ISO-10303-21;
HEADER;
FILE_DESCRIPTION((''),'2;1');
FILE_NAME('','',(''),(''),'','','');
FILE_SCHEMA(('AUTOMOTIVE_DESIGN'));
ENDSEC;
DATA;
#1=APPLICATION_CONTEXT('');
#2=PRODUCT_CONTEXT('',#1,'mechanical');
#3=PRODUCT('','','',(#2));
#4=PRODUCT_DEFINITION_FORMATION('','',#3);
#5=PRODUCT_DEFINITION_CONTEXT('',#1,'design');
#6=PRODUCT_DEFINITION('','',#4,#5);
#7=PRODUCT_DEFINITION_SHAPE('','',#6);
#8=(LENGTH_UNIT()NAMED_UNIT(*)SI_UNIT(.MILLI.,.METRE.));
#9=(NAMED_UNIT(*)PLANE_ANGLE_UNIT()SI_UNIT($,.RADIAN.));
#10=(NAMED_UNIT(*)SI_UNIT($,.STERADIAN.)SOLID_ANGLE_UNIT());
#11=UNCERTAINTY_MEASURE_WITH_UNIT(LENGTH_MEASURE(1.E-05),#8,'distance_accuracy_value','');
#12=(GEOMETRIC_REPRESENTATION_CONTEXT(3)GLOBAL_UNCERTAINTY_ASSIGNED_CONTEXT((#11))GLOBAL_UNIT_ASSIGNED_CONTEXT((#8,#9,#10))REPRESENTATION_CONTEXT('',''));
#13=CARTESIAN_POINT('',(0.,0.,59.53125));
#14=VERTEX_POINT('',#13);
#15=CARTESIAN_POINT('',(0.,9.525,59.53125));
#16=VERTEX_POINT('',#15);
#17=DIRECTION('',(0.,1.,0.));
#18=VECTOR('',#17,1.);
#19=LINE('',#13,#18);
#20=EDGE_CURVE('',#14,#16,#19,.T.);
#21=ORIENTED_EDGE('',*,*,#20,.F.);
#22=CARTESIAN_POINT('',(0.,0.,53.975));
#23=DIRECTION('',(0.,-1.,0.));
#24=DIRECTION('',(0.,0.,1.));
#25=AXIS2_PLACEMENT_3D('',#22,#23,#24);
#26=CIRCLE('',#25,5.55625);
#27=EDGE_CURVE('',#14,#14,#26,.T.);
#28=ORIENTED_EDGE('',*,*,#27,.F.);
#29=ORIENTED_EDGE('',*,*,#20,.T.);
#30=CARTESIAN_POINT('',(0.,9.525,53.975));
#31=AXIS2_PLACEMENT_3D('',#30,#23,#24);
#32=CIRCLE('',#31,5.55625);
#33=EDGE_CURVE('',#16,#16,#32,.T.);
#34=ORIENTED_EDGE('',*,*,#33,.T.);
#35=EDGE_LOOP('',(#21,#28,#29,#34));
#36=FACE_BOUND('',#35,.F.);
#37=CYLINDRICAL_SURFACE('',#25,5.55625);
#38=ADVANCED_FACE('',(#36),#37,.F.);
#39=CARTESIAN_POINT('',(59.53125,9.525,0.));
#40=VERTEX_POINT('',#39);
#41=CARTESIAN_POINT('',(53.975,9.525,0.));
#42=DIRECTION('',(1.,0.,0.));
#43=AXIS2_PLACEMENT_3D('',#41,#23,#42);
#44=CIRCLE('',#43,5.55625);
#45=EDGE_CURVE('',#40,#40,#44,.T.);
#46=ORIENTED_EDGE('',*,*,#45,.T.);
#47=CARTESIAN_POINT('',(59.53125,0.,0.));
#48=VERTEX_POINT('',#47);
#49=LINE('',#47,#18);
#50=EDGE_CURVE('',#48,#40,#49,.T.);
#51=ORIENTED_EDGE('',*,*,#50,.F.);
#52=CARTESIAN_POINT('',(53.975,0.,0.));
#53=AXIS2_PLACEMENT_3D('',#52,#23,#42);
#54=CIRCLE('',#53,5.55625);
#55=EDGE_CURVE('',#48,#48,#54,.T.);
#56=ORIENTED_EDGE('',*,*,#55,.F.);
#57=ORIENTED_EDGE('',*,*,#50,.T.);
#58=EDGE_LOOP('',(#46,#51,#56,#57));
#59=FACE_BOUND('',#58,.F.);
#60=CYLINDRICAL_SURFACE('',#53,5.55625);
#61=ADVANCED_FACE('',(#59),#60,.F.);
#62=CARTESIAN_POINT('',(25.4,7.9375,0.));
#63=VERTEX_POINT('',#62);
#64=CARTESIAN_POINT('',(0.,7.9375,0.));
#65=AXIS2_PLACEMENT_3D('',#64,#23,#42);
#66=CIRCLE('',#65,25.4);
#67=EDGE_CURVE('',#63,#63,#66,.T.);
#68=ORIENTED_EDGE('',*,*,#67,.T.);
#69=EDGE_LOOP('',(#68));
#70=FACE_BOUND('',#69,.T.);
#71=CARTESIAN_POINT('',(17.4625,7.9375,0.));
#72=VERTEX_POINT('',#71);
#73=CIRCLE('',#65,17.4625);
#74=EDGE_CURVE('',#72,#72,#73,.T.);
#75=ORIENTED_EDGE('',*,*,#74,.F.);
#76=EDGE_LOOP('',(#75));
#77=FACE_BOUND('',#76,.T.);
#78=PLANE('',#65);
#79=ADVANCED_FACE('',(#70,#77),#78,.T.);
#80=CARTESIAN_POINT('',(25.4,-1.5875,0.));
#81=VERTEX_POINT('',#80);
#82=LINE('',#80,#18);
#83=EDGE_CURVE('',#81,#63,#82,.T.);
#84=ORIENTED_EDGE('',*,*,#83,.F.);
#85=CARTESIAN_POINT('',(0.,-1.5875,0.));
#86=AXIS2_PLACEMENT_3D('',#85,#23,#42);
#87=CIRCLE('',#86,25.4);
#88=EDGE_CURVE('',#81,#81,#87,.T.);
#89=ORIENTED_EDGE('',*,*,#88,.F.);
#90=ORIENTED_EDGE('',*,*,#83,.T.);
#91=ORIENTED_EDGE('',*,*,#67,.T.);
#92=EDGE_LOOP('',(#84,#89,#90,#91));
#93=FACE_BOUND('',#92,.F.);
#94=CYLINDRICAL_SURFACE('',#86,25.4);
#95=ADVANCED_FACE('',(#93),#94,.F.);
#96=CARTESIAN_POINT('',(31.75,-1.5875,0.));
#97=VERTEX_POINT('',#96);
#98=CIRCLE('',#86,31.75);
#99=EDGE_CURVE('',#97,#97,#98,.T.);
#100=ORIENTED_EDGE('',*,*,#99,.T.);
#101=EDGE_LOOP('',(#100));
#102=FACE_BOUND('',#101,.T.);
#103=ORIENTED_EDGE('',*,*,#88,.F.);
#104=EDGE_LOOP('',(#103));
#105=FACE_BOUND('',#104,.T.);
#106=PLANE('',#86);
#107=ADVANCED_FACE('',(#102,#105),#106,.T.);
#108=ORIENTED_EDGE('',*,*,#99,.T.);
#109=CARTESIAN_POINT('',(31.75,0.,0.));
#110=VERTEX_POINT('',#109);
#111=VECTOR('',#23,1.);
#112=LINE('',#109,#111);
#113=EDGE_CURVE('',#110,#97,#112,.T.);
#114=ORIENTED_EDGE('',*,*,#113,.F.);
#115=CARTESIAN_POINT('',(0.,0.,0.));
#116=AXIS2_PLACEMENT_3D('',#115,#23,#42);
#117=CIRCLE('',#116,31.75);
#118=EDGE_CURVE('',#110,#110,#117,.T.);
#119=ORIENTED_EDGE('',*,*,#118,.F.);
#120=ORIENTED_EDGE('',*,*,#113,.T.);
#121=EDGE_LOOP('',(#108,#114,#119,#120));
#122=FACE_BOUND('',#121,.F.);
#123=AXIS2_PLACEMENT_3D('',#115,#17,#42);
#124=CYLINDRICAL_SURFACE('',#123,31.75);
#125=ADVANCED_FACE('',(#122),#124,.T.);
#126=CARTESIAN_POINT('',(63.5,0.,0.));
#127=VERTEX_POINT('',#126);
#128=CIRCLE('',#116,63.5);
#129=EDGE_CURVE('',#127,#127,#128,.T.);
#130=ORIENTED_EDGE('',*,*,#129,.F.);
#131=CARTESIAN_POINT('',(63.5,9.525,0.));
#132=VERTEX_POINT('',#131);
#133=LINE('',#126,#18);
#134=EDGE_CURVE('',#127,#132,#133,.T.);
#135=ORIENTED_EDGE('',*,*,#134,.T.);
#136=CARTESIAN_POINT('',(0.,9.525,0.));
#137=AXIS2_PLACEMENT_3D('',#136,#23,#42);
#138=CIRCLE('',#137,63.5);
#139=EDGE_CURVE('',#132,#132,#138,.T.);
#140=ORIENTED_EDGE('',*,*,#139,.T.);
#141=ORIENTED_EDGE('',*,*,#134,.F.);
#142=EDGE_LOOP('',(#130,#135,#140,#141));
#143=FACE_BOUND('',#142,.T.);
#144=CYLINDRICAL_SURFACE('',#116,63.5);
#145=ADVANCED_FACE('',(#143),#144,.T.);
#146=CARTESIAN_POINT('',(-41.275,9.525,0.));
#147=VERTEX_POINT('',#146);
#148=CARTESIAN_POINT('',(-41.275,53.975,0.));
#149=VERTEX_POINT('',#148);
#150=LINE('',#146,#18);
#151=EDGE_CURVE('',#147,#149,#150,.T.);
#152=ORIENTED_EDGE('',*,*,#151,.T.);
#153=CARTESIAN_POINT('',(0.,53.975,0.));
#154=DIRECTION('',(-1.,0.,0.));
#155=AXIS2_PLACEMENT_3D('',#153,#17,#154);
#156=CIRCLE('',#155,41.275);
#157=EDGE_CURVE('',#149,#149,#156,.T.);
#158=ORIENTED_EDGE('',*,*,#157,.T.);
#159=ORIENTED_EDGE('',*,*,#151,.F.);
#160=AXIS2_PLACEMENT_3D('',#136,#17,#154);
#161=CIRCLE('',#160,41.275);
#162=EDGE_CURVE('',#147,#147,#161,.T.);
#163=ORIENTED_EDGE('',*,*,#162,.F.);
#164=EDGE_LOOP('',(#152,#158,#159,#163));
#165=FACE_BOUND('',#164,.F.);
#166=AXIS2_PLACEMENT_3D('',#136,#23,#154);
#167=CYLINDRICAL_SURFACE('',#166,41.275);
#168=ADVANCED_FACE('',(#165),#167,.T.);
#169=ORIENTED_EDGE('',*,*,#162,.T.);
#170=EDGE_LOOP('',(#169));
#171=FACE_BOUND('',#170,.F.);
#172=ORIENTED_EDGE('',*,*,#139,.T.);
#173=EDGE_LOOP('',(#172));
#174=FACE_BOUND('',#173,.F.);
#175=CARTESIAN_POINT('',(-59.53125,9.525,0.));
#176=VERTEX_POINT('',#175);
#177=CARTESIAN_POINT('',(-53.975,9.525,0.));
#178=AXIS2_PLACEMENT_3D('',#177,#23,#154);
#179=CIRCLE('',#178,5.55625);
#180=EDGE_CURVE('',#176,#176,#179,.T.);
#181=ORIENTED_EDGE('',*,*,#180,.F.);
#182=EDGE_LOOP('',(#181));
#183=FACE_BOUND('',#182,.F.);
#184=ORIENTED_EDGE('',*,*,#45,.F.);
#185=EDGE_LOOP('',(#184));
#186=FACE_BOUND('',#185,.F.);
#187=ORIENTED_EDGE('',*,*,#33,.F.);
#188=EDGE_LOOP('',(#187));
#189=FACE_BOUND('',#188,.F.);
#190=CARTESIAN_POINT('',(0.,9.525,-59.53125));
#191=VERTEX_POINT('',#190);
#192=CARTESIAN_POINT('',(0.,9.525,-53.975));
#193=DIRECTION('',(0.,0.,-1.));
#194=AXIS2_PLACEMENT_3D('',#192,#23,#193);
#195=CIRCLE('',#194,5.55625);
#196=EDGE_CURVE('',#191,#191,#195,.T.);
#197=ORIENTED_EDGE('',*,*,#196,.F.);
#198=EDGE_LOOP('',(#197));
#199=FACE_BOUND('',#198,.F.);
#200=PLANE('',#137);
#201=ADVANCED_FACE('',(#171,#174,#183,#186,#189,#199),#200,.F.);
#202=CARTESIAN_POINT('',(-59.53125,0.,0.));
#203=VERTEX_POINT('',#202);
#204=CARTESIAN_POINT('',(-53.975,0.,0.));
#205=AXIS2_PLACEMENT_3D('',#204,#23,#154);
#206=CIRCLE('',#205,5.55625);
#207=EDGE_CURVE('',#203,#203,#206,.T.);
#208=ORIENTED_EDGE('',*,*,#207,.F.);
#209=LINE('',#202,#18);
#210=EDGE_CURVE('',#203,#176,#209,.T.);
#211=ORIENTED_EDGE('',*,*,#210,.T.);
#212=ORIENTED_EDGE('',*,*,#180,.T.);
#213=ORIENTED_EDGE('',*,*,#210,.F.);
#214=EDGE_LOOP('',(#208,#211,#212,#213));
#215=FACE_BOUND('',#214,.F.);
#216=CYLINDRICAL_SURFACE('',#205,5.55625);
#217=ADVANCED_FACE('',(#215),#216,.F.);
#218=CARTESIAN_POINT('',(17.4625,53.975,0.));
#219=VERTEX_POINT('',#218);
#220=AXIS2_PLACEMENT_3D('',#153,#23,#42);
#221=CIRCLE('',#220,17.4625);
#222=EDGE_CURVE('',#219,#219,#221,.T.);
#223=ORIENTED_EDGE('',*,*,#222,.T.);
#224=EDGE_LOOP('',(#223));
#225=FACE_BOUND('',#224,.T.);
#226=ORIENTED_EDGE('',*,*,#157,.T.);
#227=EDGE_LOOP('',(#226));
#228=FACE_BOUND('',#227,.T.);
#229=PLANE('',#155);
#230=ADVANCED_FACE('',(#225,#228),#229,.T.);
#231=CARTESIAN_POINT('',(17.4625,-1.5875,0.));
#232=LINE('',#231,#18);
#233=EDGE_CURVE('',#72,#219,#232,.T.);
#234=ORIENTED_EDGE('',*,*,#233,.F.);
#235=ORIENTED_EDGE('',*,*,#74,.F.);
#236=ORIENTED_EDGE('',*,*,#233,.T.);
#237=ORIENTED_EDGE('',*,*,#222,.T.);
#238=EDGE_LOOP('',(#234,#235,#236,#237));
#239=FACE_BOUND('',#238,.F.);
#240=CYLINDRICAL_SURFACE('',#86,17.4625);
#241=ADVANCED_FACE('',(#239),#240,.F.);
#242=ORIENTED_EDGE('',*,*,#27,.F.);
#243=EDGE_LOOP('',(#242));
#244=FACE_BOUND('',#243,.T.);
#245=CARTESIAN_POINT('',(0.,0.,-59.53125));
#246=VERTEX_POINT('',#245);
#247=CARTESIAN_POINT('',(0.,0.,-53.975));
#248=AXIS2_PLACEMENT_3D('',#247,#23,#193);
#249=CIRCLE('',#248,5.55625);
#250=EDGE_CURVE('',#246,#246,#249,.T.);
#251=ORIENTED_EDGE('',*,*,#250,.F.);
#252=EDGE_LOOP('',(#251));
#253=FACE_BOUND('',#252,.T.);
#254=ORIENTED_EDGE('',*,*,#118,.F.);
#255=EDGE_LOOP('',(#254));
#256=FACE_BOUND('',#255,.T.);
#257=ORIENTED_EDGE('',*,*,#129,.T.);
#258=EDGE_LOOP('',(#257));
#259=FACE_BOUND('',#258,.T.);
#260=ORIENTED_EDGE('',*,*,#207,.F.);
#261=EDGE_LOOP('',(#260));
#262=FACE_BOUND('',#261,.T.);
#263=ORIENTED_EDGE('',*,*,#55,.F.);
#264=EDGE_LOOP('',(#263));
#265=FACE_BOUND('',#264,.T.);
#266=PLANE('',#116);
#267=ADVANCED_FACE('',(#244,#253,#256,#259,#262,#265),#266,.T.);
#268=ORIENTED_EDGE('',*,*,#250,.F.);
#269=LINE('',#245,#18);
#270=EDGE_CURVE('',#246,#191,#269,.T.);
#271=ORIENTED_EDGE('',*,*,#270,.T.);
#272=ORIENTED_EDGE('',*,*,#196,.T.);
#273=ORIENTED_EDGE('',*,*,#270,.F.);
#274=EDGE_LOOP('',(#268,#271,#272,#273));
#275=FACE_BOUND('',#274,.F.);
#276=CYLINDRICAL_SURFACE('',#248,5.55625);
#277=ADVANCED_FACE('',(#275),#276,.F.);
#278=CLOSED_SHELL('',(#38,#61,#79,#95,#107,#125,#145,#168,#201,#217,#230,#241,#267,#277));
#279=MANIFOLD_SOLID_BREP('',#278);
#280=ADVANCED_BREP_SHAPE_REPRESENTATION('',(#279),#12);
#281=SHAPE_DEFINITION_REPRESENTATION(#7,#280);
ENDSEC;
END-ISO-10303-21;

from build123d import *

# Parameters (mm, degrees)
F0_R             = 63.5
F1_DEPTH         = 9.525
F2_R             = 31.75
F3_DEPTH         = 1.5875
F4_R             = 25.4
F5_DEPTH         = 9.525
F6_R             = 41.275
F7_DEPTH         = 44.45
F8_R             = 17.4625
F9_DEPTH         = 55.5635
F10_R            = 5.55625
F11_DEPTH        = 53.976
F11_COPIES_COUNT = 4


# Not quite as in the source:
# - a pattern or mirror of a feature is missing from the dataset's text; its kind, count and spacing are read off the source's solid


with BuildPart() as f1:
    # F0 (on Front) → F1 (new body)
    with BuildSketch(Plane.XZ):
        Circle(F0_R)
    extrude(amount=-F1_DEPTH)

    # F2 (on face) → F3 (join)
    with BuildSketch(Plane.XZ):
        Circle(F2_R)
    extrude(amount=F3_DEPTH)

    # F4 (on face) → F5 (cut)
    with BuildSketch(Plane.XZ.offset(1.5875)):
        Circle(F4_R)
    extrude(amount=-F5_DEPTH, mode=Mode.SUBTRACT)

    # F6 (on face) → F7 (join)
    with BuildSketch(Plane(origin=(0, 9.525, 0), x_dir=(-1, 0, 0), z_dir=(0, 1, 0))):
        Circle(F6_R)
    extrude(amount=F7_DEPTH)

    # F8 (on face) → F9 (cut, through all)
    with BuildSketch(Plane.XZ.offset(1.5875)):
        Circle(F8_R)
    extrude(amount=-F9_DEPTH, mode=Mode.SUBTRACT)

    # F10 (on face) → F11 (cut, through all)
    with BuildSketch(Plane.XZ):
        with Locations((53.975, 0)):
            Circle(F10_R)
    f11 = extrude(amount=-F11_DEPTH, mode=Mode.SUBTRACT)

    # F11_copies: F11 ×4 about axis
    f11_copies_axis = Axis((0, 0, 0), (0, 1, 0))
    for i in range(1, F11_COPIES_COUNT):
        add(f11.rotate(f11_copies_axis, i * 360 / F11_COPIES_COUNT), mode=Mode.SUBTRACT)


solid = f1.part
